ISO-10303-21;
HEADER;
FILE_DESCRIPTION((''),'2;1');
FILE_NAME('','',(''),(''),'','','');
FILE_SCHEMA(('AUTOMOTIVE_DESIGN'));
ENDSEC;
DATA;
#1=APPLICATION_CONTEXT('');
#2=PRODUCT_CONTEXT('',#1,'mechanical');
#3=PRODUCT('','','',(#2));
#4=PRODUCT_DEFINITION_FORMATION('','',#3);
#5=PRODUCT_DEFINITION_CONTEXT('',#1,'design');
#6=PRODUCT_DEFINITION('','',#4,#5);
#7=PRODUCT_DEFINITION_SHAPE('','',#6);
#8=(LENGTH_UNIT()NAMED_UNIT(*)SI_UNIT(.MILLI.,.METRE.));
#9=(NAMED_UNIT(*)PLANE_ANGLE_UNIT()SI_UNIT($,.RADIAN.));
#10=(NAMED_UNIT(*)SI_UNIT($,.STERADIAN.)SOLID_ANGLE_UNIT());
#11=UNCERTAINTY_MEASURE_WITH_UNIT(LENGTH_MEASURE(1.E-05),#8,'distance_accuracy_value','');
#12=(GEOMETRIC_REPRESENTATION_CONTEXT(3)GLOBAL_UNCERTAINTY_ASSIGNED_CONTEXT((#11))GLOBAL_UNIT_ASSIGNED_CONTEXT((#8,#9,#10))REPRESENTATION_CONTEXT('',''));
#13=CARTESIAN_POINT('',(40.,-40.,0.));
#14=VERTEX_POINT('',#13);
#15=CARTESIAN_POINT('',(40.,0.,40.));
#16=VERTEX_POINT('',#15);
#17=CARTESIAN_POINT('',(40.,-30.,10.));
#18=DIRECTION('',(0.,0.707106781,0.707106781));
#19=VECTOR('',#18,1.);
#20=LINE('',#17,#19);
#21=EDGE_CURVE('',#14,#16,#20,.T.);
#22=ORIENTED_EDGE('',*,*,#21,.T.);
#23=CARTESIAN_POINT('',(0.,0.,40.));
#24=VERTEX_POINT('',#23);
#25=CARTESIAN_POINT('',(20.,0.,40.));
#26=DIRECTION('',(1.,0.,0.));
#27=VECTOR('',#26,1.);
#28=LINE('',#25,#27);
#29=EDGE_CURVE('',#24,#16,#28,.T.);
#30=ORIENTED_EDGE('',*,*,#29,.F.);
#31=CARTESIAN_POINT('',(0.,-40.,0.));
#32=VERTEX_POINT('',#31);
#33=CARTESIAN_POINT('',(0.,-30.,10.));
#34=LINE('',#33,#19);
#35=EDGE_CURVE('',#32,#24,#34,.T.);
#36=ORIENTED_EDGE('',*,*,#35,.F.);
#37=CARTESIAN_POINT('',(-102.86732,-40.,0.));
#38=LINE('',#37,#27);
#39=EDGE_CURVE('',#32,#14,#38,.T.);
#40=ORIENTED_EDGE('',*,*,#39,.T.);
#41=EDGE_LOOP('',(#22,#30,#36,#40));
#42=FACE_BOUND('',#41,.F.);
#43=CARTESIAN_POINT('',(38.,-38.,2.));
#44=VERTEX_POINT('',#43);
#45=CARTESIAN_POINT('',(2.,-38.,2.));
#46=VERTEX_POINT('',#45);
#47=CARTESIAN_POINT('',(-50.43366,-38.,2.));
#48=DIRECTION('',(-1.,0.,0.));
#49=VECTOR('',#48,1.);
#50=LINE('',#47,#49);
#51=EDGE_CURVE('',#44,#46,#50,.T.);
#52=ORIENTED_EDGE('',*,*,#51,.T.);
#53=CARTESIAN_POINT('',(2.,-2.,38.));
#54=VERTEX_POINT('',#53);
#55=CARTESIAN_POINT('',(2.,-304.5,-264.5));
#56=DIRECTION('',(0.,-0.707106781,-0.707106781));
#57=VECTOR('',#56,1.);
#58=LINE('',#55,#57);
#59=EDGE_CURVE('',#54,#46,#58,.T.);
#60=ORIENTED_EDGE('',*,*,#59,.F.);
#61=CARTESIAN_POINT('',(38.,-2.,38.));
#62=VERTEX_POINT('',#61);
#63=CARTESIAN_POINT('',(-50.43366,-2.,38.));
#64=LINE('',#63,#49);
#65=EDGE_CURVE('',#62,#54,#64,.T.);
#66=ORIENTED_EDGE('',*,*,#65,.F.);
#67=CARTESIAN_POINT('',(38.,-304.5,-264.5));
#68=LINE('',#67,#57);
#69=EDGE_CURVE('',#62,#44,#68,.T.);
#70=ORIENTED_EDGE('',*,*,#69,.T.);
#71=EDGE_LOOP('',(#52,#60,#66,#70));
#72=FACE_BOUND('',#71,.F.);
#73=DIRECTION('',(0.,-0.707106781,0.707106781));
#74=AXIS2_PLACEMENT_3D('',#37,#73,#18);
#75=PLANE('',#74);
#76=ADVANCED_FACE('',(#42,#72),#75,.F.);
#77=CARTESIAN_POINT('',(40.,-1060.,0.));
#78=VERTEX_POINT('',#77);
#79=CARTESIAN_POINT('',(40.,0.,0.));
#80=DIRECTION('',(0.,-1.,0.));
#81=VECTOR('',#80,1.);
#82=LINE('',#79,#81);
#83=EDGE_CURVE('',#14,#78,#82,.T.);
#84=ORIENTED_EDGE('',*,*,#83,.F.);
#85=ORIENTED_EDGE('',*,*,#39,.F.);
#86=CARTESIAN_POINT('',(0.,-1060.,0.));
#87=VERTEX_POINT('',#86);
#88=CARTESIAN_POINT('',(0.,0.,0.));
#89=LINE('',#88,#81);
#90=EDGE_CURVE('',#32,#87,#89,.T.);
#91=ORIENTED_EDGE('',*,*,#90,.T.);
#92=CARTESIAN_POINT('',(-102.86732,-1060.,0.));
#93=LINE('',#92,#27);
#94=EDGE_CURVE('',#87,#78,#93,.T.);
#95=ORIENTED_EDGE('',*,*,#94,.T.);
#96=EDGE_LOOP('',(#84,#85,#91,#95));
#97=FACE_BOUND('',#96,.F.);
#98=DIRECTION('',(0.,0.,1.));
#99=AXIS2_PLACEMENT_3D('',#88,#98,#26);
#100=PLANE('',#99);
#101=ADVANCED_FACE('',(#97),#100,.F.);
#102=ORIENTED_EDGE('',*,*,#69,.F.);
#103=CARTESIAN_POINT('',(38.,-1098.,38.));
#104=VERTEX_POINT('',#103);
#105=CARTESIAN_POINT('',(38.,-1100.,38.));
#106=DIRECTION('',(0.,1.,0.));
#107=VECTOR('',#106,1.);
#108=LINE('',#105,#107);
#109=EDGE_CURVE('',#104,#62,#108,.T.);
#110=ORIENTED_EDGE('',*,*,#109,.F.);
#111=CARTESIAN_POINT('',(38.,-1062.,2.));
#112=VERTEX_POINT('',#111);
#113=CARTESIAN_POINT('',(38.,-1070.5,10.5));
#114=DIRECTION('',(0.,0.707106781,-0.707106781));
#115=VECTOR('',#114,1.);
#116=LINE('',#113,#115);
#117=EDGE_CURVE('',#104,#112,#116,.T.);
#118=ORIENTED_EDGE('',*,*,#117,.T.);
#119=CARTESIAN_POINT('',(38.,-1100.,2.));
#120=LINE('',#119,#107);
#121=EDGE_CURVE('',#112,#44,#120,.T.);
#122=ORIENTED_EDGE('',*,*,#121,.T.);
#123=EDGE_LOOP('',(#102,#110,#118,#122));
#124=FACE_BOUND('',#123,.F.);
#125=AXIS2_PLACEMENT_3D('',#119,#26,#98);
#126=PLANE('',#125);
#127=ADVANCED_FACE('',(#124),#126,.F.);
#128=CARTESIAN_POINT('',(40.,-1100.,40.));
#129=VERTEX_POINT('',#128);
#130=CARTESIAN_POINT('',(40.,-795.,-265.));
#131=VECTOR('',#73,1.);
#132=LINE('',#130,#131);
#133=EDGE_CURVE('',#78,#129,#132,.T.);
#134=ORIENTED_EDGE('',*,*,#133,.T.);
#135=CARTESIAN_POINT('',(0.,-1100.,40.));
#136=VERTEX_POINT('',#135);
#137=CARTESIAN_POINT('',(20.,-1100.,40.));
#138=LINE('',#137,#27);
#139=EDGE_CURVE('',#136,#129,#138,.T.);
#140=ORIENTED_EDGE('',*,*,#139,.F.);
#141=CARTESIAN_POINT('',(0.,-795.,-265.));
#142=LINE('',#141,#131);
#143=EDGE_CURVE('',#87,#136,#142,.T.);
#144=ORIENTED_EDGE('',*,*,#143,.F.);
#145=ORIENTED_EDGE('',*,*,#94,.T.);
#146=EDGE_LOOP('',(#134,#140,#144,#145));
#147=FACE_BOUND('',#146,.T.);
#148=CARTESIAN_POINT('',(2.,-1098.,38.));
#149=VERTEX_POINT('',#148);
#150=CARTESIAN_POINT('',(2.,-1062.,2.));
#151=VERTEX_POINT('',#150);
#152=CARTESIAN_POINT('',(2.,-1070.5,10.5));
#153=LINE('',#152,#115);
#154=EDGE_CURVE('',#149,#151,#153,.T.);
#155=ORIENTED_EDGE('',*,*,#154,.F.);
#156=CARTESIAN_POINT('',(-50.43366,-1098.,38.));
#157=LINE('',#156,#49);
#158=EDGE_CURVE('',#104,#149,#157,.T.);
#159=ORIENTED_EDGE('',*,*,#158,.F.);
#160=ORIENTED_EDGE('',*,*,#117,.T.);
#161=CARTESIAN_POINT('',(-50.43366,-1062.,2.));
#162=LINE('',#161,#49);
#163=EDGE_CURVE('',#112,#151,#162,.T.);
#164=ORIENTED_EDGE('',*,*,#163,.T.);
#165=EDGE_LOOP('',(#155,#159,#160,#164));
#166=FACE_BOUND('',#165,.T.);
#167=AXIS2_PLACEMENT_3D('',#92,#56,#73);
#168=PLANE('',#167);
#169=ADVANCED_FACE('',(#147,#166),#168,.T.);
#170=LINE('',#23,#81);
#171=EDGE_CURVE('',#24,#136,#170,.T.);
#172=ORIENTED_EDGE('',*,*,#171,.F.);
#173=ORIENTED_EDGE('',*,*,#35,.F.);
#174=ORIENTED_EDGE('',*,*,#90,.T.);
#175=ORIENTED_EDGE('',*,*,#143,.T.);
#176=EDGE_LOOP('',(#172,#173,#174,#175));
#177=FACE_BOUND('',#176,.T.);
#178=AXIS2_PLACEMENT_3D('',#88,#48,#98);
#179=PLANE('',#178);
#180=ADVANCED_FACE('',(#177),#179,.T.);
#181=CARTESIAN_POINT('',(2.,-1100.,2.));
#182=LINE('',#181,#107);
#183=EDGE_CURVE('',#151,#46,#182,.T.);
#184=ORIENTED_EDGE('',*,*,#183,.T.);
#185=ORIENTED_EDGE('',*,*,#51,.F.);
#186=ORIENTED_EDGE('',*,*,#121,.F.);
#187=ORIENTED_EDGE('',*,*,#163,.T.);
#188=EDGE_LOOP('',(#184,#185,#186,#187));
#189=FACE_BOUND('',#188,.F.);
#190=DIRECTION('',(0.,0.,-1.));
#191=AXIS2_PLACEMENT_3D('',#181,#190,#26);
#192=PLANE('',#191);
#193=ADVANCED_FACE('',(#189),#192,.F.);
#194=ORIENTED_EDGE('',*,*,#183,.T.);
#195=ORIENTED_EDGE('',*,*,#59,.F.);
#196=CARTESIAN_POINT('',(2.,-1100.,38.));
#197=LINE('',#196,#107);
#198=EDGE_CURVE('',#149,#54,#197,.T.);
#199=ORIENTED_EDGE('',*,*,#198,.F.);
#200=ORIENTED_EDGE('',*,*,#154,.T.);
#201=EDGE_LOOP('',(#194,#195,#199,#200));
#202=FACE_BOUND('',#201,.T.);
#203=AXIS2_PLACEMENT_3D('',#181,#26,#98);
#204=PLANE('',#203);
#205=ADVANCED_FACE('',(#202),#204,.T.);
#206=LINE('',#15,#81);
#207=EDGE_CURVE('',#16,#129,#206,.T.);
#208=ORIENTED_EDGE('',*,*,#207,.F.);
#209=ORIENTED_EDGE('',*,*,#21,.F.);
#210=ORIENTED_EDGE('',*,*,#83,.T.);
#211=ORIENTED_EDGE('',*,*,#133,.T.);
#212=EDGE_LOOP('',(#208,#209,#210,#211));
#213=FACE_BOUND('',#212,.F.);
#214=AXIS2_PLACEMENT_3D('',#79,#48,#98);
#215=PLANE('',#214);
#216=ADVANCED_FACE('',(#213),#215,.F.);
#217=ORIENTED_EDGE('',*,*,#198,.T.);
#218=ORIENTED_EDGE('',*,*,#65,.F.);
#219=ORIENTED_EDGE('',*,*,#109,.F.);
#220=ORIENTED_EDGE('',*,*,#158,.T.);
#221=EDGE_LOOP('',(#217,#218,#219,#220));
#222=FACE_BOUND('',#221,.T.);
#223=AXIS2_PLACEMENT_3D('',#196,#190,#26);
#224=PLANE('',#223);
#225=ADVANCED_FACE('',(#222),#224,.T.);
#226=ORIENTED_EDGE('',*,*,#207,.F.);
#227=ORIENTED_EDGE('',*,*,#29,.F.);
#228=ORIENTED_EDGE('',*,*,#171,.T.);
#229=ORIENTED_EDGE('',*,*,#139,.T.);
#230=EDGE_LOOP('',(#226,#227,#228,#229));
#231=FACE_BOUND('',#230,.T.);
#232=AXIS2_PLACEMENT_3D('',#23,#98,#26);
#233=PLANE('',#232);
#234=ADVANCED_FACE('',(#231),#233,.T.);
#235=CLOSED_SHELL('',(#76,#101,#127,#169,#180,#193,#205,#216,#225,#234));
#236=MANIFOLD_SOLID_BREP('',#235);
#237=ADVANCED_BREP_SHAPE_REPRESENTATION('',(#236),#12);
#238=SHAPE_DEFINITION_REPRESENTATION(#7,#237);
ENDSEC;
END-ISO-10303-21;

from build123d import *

# Parameters (mm, degrees)
F0_W        = 40
F0_H        = 40
F1_DEPTH    = 1100
F2_W        = 36
F2_H        = 36
F3_DEPTH    = 1100.001
F4_T1_DEPTH = 245.7346390373


# Not quite as in the source:
# - a fillet or chamfer that OpenCascade refuses, or shapes differently, is made with other operations: its cross-section is extruded or revolved along the edge and cut away or added


with BuildPart() as f1:
    # F0 (on Front) → F1 (new body)
    with BuildSketch(Plane.XZ):
        with Locations((20, 20)):
            Rectangle(F0_W, F0_H)
    extrude(amount=F1_DEPTH)

    # F2 (on face) → F3 (cut, through all)
    with BuildSketch(Plane.XZ.offset(1100)):
        with Locations((20, 20)):
            Rectangle(F2_W, F2_H)
    extrude(amount=-F3_DEPTH, mode=Mode.SUBTRACT)

    # F4: chamfer of 40 on 2 edges, made by hand

    # F4_s2 → F4_t1 (cut)
    with BuildSketch(Plane.YZ.offset(-102.8673195186)):
        Polygon((-1060, 0), (-1100, 40), (-1100, 0), align=None)
        Polygon((-40, 0), (0, 40), (0, 0), align=None)
    extrude(amount=F4_T1_DEPTH, mode=Mode.SUBTRACT)


solid = f1.part
